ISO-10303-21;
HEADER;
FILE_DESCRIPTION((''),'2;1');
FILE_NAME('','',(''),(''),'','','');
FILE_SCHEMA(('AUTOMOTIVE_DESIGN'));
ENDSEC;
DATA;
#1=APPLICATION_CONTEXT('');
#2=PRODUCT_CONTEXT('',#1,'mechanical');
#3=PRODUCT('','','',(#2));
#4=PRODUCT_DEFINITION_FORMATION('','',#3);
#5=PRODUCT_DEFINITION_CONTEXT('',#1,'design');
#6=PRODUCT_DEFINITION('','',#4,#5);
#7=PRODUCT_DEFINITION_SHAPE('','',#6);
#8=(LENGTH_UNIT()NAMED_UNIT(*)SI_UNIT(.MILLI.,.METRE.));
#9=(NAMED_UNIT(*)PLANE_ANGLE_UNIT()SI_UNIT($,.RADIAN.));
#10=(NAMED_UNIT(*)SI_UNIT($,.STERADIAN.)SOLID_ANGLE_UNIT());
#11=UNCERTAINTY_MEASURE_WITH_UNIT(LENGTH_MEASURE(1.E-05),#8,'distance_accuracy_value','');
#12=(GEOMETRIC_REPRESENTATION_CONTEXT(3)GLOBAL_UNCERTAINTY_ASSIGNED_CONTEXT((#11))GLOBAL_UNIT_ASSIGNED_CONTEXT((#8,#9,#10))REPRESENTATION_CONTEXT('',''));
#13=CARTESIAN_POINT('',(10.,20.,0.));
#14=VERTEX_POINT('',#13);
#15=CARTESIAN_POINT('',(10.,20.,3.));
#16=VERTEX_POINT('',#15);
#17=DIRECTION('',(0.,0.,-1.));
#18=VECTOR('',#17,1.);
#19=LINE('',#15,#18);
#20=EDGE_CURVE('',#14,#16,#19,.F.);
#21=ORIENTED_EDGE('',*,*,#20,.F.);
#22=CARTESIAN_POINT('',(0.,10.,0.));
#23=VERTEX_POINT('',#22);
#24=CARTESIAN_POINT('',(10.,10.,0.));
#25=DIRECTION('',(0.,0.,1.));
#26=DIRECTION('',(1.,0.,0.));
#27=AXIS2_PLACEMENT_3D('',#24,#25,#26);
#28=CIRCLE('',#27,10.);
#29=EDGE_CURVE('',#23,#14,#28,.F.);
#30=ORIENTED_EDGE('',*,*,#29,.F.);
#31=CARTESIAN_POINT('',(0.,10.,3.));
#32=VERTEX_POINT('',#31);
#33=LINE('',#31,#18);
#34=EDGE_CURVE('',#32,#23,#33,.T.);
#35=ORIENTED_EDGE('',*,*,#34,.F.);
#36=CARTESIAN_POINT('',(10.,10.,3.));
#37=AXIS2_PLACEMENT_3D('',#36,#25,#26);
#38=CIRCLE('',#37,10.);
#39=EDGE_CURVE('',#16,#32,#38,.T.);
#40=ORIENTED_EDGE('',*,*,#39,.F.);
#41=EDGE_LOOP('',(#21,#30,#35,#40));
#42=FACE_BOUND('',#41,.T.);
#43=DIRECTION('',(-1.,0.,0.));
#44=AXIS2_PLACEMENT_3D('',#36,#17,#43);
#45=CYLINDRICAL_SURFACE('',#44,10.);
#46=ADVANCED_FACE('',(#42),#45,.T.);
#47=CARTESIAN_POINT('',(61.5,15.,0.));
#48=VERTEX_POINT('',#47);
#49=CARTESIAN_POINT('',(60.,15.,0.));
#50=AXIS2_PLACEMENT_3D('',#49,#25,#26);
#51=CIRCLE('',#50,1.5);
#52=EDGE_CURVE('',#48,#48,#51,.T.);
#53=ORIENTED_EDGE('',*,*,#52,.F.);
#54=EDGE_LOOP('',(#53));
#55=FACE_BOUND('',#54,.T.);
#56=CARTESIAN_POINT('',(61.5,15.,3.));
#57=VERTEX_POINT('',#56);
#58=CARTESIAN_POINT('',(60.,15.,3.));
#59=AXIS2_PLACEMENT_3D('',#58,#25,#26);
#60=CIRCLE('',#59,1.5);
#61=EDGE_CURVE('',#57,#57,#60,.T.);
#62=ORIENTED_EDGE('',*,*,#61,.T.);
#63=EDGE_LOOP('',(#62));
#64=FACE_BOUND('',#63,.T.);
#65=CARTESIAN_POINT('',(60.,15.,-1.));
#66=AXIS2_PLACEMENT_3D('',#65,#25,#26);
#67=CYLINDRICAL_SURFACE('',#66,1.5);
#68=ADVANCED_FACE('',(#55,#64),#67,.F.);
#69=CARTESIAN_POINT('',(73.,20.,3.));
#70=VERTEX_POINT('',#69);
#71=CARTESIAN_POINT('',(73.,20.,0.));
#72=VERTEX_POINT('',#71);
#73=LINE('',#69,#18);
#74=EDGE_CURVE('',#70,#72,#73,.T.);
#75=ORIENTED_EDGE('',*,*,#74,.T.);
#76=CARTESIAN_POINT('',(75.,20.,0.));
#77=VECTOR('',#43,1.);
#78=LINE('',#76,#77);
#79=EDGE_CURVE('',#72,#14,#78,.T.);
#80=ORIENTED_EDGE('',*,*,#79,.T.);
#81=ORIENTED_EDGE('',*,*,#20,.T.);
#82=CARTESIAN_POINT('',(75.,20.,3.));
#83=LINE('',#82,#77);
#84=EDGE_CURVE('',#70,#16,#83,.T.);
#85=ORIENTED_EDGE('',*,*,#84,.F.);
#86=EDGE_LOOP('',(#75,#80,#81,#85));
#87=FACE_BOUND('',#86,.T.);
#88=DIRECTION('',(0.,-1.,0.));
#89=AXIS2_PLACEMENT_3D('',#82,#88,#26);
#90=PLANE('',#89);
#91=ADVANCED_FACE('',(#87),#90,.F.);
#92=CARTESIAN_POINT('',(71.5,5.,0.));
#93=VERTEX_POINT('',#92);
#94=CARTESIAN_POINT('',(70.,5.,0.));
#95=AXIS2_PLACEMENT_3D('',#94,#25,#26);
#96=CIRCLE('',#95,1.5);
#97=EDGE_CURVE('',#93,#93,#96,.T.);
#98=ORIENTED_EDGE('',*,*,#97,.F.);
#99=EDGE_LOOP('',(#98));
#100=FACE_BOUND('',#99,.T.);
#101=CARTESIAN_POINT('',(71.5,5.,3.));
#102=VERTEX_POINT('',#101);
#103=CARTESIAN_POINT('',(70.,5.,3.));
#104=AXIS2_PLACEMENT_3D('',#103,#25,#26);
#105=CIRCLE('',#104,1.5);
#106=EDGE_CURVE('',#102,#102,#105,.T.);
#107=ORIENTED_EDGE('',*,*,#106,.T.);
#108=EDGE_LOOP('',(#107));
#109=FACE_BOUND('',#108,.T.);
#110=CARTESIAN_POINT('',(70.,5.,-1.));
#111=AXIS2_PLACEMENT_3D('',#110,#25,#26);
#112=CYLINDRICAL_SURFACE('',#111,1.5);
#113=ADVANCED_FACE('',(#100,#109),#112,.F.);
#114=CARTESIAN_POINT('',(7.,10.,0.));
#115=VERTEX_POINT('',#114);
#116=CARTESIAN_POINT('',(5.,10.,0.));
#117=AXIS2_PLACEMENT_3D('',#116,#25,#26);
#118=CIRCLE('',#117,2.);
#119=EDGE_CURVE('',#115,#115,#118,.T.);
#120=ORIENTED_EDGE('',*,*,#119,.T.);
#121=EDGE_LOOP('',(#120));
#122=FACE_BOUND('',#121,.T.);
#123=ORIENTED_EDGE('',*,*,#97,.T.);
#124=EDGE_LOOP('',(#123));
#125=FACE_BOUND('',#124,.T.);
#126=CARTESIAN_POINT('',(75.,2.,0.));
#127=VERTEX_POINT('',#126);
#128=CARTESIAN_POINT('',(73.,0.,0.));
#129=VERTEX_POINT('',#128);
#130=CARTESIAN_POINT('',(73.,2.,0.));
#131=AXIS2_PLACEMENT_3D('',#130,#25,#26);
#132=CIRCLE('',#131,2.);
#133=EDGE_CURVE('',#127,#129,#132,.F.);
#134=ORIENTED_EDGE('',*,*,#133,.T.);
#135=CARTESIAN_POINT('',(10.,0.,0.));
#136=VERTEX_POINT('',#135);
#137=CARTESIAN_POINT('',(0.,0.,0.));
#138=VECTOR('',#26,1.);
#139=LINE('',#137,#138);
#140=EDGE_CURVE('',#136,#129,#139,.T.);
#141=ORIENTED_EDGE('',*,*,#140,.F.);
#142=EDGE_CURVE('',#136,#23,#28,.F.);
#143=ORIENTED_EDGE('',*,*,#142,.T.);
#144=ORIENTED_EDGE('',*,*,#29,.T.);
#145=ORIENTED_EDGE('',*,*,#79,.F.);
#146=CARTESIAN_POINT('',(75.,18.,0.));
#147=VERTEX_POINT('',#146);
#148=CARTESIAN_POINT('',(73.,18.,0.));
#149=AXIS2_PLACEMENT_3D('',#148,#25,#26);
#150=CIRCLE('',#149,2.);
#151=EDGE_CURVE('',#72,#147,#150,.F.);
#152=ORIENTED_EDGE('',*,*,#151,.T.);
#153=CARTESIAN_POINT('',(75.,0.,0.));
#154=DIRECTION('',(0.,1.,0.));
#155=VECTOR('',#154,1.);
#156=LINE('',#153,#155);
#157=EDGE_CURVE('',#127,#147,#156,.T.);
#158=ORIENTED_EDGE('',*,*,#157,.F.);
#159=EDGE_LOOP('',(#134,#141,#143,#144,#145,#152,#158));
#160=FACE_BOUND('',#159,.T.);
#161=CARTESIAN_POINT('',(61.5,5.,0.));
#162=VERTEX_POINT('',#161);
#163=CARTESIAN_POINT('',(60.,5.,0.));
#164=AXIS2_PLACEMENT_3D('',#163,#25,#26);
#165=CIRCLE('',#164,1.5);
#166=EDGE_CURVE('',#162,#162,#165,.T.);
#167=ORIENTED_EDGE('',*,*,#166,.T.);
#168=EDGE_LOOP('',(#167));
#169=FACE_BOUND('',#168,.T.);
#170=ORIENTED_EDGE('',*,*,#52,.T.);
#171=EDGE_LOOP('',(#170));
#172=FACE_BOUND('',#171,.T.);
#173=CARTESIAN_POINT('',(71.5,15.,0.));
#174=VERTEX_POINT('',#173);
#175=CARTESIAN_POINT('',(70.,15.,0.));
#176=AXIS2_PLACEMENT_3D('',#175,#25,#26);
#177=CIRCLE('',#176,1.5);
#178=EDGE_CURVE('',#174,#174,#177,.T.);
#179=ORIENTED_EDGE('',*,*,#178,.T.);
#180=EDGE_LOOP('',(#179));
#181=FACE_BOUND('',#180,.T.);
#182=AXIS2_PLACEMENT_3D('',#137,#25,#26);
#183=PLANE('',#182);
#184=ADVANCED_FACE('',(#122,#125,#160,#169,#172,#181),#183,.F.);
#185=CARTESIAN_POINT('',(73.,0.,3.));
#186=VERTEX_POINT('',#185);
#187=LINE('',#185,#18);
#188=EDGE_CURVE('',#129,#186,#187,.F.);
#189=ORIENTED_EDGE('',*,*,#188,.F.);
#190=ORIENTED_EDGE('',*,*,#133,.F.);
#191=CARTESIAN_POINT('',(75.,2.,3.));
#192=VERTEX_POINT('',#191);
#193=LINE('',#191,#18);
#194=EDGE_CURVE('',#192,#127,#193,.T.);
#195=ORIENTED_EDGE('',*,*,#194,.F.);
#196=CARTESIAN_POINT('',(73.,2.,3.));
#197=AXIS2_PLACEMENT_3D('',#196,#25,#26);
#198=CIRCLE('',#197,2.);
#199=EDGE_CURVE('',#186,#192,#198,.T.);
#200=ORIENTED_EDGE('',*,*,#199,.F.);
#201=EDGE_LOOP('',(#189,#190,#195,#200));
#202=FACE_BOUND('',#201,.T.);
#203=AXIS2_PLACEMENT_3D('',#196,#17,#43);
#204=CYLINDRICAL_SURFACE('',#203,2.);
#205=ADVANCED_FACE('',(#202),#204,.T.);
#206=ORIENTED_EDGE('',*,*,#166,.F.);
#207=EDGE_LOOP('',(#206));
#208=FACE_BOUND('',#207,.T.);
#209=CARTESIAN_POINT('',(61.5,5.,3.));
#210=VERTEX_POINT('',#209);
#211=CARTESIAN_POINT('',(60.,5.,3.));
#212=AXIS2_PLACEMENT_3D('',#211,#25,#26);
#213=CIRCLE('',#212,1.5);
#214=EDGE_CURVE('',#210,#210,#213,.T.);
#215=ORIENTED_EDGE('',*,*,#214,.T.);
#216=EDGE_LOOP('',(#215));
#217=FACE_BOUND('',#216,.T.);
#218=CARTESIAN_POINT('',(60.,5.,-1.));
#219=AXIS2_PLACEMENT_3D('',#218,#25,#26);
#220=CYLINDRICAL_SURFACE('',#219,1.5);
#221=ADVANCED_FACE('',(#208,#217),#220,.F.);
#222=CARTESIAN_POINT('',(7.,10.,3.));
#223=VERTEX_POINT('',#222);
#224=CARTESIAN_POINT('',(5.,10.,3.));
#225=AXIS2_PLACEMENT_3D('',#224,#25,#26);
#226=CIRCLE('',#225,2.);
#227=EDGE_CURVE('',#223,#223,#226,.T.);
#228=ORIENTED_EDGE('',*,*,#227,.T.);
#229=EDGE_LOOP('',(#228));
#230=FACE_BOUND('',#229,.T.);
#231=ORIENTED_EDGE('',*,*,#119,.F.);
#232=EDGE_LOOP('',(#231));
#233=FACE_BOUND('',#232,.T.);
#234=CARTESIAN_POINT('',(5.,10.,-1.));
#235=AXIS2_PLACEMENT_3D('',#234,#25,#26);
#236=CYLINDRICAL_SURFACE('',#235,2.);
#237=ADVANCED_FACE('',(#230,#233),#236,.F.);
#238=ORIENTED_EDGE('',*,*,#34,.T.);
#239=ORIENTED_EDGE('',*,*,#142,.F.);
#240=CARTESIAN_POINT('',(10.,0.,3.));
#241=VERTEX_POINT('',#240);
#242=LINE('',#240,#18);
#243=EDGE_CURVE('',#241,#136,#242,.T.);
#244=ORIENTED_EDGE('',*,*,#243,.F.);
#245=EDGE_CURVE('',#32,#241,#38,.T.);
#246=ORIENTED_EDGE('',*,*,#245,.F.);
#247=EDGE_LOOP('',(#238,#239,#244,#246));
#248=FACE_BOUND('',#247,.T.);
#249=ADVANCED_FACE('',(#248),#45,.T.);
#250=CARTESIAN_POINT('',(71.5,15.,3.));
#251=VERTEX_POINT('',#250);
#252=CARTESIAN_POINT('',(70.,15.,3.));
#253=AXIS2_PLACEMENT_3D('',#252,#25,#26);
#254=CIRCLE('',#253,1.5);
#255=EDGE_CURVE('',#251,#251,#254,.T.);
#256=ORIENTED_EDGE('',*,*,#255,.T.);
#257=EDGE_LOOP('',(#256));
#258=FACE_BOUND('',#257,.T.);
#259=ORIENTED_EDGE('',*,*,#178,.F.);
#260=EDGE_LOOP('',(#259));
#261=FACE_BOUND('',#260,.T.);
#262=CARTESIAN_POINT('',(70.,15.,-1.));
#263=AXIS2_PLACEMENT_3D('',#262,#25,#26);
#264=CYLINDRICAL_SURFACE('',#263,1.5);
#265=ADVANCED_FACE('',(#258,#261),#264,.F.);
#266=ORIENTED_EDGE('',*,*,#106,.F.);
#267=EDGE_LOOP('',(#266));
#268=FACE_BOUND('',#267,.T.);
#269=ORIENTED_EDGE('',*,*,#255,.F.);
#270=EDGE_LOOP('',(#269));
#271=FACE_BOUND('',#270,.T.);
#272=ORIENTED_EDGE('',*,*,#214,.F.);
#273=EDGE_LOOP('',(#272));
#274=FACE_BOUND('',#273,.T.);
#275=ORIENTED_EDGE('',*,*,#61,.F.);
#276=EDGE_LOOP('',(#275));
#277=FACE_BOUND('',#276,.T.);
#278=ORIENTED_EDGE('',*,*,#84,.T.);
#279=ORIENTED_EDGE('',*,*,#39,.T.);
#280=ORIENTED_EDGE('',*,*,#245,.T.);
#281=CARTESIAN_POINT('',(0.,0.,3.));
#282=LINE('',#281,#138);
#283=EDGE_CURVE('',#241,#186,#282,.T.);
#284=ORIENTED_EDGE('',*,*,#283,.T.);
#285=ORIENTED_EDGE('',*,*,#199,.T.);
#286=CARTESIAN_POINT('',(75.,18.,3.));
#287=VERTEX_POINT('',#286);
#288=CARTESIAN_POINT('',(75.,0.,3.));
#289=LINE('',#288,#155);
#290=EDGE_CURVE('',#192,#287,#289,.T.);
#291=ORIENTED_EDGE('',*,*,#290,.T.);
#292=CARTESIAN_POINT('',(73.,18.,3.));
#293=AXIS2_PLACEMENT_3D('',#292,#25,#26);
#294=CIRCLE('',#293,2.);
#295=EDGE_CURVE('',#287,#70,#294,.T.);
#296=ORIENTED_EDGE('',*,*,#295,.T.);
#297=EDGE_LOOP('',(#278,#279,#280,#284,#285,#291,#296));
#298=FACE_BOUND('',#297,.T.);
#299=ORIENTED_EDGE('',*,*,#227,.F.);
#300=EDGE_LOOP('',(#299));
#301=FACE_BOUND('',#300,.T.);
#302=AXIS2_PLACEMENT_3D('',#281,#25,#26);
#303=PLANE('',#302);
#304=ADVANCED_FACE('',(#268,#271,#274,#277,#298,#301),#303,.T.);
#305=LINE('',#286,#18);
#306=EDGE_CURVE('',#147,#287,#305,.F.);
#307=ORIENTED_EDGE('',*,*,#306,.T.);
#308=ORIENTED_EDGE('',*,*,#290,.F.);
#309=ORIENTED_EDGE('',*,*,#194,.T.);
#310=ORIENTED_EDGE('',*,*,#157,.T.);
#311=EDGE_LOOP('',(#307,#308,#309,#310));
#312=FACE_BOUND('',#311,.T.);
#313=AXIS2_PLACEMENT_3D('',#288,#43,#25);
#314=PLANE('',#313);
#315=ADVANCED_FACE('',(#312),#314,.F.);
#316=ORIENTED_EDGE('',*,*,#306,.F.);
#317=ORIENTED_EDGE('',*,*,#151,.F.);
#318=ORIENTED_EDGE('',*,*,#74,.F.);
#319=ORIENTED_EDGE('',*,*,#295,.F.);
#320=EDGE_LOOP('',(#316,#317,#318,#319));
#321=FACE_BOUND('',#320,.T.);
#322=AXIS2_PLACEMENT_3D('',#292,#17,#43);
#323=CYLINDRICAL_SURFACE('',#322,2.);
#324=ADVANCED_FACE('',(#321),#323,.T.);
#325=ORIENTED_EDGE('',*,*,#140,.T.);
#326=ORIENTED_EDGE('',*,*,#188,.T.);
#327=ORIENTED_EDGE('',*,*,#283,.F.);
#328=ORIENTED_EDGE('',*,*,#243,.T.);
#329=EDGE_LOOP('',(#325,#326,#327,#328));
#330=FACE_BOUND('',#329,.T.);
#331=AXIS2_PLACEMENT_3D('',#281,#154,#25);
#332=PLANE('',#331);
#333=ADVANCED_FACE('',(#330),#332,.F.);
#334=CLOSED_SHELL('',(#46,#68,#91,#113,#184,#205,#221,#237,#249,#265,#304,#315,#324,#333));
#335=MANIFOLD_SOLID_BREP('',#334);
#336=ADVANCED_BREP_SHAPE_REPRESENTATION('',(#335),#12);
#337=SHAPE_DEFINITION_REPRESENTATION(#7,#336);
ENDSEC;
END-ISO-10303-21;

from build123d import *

# Parameters (mm, degrees)
SKETCH_1_W          = 75
SKETCH_1_H          = 20
EXTRUDE_1_DEPTH     = 3
SKETCH_2_R          = 1.5
SKETCH_2_R_2        = 2
CUT_EXTRUDE_1_DEPTH = 4
FILLET_1_R          = 10
FILLET_2_R          = 2


with BuildPart() as part:
    # 草图1 → 凸台-拉伸1 (new body)
    with BuildSketch(Plane.XY):
        with Locations((37.5, 10)):
            Rectangle(SKETCH_1_W, SKETCH_1_H)
    extrude(amount=EXTRUDE_1_DEPTH)

    # 草图2 → 切除-拉伸1 (cut)
    with BuildSketch(Plane.XY.offset(3)):
        with Locations((70, 15)):
            Circle(SKETCH_2_R)
        with Locations((70, 5)):
            Circle(SKETCH_2_R)
        with Locations((60, 15)):
            Circle(SKETCH_2_R)
        with Locations((60, 5)):
            Circle(SKETCH_2_R)
        with Locations((5, 10)):
            Circle(SKETCH_2_R_2)
    extrude(amount=-CUT_EXTRUDE_1_DEPTH, mode=Mode.SUBTRACT)

    # 圆角1
    fillet_1_edges = [part.edges().sort_by_distance(p)[0] for p in [
        (0, 0, 1.5),
        (0, 20, 1.5),
    ]]
    fillet(fillet_1_edges, radius=FILLET_1_R - 0.0001)  # a hair under: the kernel refuses the full size

    # 圆角2
    fillet_2_edges = [part.edges().sort_by_distance(p)[0] for p in [
        (75, 20, 1.5),
        (75, 0, 1.5),
    ]]
    fillet(fillet_2_edges, radius=FILLET_2_R)


solid = part.part
